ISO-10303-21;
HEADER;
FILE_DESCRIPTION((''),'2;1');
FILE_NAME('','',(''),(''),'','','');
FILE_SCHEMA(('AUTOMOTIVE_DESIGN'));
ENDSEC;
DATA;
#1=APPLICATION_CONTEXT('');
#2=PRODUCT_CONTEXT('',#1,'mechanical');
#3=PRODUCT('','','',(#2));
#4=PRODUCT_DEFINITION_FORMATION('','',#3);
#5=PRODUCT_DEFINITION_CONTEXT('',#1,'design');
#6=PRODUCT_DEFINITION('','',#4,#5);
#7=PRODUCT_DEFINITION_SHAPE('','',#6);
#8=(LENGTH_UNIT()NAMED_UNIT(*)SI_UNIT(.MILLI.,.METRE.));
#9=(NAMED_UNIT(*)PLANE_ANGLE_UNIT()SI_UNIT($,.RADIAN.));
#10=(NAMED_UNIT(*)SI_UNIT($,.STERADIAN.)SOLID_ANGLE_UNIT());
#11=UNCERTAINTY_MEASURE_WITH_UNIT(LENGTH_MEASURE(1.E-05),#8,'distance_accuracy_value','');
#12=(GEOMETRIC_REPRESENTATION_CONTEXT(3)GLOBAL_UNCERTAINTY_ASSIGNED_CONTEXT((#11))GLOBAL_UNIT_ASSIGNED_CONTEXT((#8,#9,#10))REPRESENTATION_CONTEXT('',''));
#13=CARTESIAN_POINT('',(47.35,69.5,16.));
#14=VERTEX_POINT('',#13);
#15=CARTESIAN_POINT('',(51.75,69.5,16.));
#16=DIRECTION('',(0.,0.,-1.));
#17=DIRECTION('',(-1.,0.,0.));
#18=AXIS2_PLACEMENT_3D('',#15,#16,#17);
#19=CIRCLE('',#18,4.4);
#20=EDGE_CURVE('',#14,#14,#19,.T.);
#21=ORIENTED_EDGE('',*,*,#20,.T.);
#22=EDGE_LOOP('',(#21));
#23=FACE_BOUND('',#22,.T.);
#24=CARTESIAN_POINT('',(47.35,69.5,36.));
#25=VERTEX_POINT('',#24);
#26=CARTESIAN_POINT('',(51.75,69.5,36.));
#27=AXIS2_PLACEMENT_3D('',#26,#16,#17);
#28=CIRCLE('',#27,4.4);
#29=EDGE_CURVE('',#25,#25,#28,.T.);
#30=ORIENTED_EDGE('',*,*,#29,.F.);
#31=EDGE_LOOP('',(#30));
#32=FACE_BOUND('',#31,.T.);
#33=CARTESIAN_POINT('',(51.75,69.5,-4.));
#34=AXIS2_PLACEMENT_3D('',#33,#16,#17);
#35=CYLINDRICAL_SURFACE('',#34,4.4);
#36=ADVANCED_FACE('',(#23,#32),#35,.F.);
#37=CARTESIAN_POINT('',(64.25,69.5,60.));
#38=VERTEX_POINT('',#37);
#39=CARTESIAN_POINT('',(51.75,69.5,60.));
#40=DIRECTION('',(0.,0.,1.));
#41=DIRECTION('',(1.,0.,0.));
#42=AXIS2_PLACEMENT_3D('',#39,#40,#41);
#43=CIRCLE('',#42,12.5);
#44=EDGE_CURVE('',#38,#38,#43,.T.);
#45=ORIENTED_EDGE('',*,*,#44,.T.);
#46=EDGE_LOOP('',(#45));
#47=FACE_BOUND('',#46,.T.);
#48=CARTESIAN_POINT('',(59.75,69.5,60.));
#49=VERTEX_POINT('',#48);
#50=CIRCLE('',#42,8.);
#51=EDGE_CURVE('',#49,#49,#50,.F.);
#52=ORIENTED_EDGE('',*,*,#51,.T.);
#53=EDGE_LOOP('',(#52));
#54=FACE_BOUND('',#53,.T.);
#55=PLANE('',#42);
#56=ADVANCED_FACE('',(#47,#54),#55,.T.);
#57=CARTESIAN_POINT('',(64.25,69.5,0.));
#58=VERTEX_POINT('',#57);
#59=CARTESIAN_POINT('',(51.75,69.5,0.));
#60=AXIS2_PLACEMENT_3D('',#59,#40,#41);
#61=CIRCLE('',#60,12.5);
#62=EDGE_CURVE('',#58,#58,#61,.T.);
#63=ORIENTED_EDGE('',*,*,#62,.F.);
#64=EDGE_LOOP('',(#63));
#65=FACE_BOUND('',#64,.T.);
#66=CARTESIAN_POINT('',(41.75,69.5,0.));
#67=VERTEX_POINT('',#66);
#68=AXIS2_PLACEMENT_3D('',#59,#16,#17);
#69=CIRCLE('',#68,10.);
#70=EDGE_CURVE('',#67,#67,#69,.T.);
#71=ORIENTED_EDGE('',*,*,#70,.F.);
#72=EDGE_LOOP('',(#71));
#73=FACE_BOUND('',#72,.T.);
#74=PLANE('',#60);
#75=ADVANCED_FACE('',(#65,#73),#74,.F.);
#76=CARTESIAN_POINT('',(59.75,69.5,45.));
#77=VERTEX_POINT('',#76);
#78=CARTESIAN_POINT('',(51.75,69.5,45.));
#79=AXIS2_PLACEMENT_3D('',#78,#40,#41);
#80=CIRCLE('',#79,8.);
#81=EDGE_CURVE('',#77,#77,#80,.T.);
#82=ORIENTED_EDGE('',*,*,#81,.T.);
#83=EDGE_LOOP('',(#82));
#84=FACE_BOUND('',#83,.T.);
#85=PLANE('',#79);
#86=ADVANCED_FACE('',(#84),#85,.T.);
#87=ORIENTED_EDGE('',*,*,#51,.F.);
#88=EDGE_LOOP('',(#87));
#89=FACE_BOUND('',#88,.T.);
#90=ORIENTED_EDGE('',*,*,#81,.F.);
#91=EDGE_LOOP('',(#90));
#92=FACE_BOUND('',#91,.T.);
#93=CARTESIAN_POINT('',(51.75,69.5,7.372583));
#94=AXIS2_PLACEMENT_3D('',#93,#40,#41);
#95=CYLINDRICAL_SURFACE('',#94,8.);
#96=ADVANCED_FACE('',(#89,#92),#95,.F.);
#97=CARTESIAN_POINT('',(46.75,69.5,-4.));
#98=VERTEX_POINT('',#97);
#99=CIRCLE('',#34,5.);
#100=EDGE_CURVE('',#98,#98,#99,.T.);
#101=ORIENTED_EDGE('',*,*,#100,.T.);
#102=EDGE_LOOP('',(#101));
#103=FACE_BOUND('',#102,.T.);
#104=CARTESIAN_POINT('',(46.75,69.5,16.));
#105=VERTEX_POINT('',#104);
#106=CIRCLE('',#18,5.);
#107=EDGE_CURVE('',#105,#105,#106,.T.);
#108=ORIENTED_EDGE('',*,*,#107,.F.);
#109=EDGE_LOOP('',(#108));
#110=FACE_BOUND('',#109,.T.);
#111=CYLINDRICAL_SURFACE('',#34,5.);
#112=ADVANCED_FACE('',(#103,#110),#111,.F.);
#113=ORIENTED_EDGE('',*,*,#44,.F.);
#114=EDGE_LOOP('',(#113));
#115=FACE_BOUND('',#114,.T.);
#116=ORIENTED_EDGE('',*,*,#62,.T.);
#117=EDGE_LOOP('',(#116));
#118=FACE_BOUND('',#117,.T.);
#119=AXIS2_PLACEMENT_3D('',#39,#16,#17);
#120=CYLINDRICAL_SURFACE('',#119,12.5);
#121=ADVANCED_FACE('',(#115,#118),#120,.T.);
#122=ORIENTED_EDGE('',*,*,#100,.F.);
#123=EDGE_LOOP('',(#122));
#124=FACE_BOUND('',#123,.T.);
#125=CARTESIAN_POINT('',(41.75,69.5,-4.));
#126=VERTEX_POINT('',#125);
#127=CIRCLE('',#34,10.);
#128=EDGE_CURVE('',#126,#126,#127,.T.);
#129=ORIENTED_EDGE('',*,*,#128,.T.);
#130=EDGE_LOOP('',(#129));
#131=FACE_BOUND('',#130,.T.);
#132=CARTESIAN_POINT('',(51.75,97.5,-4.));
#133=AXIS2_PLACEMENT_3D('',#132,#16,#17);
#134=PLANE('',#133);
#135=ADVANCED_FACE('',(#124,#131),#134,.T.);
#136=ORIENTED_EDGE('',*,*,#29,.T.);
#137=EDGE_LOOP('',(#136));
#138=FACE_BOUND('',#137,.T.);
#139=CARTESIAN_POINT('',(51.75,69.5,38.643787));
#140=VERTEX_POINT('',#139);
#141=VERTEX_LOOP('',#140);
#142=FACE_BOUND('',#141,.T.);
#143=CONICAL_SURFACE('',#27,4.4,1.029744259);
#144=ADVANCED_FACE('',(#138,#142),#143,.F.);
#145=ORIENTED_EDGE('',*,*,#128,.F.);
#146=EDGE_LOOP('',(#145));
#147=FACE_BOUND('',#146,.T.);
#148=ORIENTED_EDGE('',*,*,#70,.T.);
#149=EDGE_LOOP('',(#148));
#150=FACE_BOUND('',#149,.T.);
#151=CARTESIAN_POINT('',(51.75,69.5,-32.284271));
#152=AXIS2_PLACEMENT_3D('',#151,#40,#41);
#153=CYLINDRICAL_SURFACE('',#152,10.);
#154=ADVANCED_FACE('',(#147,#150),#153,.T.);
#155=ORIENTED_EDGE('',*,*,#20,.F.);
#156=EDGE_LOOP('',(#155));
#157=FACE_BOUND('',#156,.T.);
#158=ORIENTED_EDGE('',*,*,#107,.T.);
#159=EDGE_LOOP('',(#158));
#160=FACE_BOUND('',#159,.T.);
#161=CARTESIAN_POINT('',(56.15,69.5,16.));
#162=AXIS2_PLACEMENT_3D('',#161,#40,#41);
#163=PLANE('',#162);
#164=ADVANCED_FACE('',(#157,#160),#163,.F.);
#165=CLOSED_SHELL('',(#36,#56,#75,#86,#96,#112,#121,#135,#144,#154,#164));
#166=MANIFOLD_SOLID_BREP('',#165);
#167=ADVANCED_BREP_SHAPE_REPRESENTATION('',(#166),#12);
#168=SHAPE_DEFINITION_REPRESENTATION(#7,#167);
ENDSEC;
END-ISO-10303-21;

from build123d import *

# Parameters (mm, degrees)
SKETCH_1_R            = 12.5
EXTRUDE_1_DEPTH       = 60
SKETCH_2_R            = 10
EXTRUDE_2_DEPTH       = 4
OTHER_START           = 45
OTHER_1_OUTLINE_R     = 8
OTHER_1_DEPTH         = 15
M10X1_251_D           = 8.8
M10X1_251_DEPTH       = 40
M10X1_251_CBORE_D     = 10
M10X1_251_CBORE_DEPTH = 20
M10X1_251_TIP         = 2.643786724


# Read off the part's stored shape, not the designer's step: Полость1
with BuildPart() as part:
    # Эскиз1 → Бобышка-Вытянуть1 (new body)
    with BuildSketch(Plane.XY):
        with Locations((51.75, 69.5)):
            Circle(SKETCH_1_R)
    extrude(amount=EXTRUDE_1_DEPTH)

    # Эскиз2 → Бобышка-Вытянуть2 (add)
    with BuildSketch(Plane(origin=(0, 0, 0), x_dir=(-1, 0, 0), z_dir=(0, 0, -1))):
        with Locations((-51.75, 69.5)):
            Circle(SKETCH_2_R)
    extrude(amount=EXTRUDE_2_DEPTH)

    # Полость1 outline → Полость1 (cut)
    with BuildSketch(Plane.XY.offset(OTHER_START)):
        with Locations((51.75, 69.5)):
            Circle(OTHER_1_OUTLINE_R)
    extrude(amount=OTHER_1_DEPTH, mode=Mode.SUBTRACT)

    # Отверстие обработанное метчиком M10x1.251
    with Locations(Plane(origin=(0, 0, -4), x_dir=(-1, 0, 0), z_dir=(0, 0, -1))):
        with Locations((-51.75, 69.5)):
            CounterBoreHole(M10X1_251_D / 2, M10X1_251_CBORE_D / 2, M10X1_251_CBORE_DEPTH, depth=M10X1_251_DEPTH)
            with Locations((0, 0, -(M10X1_251_DEPTH + M10X1_251_TIP / 2))):  # 118° drill point
                Cone(0, M10X1_251_D / 2, M10X1_251_TIP, mode=Mode.SUBTRACT)


solid = part.part
